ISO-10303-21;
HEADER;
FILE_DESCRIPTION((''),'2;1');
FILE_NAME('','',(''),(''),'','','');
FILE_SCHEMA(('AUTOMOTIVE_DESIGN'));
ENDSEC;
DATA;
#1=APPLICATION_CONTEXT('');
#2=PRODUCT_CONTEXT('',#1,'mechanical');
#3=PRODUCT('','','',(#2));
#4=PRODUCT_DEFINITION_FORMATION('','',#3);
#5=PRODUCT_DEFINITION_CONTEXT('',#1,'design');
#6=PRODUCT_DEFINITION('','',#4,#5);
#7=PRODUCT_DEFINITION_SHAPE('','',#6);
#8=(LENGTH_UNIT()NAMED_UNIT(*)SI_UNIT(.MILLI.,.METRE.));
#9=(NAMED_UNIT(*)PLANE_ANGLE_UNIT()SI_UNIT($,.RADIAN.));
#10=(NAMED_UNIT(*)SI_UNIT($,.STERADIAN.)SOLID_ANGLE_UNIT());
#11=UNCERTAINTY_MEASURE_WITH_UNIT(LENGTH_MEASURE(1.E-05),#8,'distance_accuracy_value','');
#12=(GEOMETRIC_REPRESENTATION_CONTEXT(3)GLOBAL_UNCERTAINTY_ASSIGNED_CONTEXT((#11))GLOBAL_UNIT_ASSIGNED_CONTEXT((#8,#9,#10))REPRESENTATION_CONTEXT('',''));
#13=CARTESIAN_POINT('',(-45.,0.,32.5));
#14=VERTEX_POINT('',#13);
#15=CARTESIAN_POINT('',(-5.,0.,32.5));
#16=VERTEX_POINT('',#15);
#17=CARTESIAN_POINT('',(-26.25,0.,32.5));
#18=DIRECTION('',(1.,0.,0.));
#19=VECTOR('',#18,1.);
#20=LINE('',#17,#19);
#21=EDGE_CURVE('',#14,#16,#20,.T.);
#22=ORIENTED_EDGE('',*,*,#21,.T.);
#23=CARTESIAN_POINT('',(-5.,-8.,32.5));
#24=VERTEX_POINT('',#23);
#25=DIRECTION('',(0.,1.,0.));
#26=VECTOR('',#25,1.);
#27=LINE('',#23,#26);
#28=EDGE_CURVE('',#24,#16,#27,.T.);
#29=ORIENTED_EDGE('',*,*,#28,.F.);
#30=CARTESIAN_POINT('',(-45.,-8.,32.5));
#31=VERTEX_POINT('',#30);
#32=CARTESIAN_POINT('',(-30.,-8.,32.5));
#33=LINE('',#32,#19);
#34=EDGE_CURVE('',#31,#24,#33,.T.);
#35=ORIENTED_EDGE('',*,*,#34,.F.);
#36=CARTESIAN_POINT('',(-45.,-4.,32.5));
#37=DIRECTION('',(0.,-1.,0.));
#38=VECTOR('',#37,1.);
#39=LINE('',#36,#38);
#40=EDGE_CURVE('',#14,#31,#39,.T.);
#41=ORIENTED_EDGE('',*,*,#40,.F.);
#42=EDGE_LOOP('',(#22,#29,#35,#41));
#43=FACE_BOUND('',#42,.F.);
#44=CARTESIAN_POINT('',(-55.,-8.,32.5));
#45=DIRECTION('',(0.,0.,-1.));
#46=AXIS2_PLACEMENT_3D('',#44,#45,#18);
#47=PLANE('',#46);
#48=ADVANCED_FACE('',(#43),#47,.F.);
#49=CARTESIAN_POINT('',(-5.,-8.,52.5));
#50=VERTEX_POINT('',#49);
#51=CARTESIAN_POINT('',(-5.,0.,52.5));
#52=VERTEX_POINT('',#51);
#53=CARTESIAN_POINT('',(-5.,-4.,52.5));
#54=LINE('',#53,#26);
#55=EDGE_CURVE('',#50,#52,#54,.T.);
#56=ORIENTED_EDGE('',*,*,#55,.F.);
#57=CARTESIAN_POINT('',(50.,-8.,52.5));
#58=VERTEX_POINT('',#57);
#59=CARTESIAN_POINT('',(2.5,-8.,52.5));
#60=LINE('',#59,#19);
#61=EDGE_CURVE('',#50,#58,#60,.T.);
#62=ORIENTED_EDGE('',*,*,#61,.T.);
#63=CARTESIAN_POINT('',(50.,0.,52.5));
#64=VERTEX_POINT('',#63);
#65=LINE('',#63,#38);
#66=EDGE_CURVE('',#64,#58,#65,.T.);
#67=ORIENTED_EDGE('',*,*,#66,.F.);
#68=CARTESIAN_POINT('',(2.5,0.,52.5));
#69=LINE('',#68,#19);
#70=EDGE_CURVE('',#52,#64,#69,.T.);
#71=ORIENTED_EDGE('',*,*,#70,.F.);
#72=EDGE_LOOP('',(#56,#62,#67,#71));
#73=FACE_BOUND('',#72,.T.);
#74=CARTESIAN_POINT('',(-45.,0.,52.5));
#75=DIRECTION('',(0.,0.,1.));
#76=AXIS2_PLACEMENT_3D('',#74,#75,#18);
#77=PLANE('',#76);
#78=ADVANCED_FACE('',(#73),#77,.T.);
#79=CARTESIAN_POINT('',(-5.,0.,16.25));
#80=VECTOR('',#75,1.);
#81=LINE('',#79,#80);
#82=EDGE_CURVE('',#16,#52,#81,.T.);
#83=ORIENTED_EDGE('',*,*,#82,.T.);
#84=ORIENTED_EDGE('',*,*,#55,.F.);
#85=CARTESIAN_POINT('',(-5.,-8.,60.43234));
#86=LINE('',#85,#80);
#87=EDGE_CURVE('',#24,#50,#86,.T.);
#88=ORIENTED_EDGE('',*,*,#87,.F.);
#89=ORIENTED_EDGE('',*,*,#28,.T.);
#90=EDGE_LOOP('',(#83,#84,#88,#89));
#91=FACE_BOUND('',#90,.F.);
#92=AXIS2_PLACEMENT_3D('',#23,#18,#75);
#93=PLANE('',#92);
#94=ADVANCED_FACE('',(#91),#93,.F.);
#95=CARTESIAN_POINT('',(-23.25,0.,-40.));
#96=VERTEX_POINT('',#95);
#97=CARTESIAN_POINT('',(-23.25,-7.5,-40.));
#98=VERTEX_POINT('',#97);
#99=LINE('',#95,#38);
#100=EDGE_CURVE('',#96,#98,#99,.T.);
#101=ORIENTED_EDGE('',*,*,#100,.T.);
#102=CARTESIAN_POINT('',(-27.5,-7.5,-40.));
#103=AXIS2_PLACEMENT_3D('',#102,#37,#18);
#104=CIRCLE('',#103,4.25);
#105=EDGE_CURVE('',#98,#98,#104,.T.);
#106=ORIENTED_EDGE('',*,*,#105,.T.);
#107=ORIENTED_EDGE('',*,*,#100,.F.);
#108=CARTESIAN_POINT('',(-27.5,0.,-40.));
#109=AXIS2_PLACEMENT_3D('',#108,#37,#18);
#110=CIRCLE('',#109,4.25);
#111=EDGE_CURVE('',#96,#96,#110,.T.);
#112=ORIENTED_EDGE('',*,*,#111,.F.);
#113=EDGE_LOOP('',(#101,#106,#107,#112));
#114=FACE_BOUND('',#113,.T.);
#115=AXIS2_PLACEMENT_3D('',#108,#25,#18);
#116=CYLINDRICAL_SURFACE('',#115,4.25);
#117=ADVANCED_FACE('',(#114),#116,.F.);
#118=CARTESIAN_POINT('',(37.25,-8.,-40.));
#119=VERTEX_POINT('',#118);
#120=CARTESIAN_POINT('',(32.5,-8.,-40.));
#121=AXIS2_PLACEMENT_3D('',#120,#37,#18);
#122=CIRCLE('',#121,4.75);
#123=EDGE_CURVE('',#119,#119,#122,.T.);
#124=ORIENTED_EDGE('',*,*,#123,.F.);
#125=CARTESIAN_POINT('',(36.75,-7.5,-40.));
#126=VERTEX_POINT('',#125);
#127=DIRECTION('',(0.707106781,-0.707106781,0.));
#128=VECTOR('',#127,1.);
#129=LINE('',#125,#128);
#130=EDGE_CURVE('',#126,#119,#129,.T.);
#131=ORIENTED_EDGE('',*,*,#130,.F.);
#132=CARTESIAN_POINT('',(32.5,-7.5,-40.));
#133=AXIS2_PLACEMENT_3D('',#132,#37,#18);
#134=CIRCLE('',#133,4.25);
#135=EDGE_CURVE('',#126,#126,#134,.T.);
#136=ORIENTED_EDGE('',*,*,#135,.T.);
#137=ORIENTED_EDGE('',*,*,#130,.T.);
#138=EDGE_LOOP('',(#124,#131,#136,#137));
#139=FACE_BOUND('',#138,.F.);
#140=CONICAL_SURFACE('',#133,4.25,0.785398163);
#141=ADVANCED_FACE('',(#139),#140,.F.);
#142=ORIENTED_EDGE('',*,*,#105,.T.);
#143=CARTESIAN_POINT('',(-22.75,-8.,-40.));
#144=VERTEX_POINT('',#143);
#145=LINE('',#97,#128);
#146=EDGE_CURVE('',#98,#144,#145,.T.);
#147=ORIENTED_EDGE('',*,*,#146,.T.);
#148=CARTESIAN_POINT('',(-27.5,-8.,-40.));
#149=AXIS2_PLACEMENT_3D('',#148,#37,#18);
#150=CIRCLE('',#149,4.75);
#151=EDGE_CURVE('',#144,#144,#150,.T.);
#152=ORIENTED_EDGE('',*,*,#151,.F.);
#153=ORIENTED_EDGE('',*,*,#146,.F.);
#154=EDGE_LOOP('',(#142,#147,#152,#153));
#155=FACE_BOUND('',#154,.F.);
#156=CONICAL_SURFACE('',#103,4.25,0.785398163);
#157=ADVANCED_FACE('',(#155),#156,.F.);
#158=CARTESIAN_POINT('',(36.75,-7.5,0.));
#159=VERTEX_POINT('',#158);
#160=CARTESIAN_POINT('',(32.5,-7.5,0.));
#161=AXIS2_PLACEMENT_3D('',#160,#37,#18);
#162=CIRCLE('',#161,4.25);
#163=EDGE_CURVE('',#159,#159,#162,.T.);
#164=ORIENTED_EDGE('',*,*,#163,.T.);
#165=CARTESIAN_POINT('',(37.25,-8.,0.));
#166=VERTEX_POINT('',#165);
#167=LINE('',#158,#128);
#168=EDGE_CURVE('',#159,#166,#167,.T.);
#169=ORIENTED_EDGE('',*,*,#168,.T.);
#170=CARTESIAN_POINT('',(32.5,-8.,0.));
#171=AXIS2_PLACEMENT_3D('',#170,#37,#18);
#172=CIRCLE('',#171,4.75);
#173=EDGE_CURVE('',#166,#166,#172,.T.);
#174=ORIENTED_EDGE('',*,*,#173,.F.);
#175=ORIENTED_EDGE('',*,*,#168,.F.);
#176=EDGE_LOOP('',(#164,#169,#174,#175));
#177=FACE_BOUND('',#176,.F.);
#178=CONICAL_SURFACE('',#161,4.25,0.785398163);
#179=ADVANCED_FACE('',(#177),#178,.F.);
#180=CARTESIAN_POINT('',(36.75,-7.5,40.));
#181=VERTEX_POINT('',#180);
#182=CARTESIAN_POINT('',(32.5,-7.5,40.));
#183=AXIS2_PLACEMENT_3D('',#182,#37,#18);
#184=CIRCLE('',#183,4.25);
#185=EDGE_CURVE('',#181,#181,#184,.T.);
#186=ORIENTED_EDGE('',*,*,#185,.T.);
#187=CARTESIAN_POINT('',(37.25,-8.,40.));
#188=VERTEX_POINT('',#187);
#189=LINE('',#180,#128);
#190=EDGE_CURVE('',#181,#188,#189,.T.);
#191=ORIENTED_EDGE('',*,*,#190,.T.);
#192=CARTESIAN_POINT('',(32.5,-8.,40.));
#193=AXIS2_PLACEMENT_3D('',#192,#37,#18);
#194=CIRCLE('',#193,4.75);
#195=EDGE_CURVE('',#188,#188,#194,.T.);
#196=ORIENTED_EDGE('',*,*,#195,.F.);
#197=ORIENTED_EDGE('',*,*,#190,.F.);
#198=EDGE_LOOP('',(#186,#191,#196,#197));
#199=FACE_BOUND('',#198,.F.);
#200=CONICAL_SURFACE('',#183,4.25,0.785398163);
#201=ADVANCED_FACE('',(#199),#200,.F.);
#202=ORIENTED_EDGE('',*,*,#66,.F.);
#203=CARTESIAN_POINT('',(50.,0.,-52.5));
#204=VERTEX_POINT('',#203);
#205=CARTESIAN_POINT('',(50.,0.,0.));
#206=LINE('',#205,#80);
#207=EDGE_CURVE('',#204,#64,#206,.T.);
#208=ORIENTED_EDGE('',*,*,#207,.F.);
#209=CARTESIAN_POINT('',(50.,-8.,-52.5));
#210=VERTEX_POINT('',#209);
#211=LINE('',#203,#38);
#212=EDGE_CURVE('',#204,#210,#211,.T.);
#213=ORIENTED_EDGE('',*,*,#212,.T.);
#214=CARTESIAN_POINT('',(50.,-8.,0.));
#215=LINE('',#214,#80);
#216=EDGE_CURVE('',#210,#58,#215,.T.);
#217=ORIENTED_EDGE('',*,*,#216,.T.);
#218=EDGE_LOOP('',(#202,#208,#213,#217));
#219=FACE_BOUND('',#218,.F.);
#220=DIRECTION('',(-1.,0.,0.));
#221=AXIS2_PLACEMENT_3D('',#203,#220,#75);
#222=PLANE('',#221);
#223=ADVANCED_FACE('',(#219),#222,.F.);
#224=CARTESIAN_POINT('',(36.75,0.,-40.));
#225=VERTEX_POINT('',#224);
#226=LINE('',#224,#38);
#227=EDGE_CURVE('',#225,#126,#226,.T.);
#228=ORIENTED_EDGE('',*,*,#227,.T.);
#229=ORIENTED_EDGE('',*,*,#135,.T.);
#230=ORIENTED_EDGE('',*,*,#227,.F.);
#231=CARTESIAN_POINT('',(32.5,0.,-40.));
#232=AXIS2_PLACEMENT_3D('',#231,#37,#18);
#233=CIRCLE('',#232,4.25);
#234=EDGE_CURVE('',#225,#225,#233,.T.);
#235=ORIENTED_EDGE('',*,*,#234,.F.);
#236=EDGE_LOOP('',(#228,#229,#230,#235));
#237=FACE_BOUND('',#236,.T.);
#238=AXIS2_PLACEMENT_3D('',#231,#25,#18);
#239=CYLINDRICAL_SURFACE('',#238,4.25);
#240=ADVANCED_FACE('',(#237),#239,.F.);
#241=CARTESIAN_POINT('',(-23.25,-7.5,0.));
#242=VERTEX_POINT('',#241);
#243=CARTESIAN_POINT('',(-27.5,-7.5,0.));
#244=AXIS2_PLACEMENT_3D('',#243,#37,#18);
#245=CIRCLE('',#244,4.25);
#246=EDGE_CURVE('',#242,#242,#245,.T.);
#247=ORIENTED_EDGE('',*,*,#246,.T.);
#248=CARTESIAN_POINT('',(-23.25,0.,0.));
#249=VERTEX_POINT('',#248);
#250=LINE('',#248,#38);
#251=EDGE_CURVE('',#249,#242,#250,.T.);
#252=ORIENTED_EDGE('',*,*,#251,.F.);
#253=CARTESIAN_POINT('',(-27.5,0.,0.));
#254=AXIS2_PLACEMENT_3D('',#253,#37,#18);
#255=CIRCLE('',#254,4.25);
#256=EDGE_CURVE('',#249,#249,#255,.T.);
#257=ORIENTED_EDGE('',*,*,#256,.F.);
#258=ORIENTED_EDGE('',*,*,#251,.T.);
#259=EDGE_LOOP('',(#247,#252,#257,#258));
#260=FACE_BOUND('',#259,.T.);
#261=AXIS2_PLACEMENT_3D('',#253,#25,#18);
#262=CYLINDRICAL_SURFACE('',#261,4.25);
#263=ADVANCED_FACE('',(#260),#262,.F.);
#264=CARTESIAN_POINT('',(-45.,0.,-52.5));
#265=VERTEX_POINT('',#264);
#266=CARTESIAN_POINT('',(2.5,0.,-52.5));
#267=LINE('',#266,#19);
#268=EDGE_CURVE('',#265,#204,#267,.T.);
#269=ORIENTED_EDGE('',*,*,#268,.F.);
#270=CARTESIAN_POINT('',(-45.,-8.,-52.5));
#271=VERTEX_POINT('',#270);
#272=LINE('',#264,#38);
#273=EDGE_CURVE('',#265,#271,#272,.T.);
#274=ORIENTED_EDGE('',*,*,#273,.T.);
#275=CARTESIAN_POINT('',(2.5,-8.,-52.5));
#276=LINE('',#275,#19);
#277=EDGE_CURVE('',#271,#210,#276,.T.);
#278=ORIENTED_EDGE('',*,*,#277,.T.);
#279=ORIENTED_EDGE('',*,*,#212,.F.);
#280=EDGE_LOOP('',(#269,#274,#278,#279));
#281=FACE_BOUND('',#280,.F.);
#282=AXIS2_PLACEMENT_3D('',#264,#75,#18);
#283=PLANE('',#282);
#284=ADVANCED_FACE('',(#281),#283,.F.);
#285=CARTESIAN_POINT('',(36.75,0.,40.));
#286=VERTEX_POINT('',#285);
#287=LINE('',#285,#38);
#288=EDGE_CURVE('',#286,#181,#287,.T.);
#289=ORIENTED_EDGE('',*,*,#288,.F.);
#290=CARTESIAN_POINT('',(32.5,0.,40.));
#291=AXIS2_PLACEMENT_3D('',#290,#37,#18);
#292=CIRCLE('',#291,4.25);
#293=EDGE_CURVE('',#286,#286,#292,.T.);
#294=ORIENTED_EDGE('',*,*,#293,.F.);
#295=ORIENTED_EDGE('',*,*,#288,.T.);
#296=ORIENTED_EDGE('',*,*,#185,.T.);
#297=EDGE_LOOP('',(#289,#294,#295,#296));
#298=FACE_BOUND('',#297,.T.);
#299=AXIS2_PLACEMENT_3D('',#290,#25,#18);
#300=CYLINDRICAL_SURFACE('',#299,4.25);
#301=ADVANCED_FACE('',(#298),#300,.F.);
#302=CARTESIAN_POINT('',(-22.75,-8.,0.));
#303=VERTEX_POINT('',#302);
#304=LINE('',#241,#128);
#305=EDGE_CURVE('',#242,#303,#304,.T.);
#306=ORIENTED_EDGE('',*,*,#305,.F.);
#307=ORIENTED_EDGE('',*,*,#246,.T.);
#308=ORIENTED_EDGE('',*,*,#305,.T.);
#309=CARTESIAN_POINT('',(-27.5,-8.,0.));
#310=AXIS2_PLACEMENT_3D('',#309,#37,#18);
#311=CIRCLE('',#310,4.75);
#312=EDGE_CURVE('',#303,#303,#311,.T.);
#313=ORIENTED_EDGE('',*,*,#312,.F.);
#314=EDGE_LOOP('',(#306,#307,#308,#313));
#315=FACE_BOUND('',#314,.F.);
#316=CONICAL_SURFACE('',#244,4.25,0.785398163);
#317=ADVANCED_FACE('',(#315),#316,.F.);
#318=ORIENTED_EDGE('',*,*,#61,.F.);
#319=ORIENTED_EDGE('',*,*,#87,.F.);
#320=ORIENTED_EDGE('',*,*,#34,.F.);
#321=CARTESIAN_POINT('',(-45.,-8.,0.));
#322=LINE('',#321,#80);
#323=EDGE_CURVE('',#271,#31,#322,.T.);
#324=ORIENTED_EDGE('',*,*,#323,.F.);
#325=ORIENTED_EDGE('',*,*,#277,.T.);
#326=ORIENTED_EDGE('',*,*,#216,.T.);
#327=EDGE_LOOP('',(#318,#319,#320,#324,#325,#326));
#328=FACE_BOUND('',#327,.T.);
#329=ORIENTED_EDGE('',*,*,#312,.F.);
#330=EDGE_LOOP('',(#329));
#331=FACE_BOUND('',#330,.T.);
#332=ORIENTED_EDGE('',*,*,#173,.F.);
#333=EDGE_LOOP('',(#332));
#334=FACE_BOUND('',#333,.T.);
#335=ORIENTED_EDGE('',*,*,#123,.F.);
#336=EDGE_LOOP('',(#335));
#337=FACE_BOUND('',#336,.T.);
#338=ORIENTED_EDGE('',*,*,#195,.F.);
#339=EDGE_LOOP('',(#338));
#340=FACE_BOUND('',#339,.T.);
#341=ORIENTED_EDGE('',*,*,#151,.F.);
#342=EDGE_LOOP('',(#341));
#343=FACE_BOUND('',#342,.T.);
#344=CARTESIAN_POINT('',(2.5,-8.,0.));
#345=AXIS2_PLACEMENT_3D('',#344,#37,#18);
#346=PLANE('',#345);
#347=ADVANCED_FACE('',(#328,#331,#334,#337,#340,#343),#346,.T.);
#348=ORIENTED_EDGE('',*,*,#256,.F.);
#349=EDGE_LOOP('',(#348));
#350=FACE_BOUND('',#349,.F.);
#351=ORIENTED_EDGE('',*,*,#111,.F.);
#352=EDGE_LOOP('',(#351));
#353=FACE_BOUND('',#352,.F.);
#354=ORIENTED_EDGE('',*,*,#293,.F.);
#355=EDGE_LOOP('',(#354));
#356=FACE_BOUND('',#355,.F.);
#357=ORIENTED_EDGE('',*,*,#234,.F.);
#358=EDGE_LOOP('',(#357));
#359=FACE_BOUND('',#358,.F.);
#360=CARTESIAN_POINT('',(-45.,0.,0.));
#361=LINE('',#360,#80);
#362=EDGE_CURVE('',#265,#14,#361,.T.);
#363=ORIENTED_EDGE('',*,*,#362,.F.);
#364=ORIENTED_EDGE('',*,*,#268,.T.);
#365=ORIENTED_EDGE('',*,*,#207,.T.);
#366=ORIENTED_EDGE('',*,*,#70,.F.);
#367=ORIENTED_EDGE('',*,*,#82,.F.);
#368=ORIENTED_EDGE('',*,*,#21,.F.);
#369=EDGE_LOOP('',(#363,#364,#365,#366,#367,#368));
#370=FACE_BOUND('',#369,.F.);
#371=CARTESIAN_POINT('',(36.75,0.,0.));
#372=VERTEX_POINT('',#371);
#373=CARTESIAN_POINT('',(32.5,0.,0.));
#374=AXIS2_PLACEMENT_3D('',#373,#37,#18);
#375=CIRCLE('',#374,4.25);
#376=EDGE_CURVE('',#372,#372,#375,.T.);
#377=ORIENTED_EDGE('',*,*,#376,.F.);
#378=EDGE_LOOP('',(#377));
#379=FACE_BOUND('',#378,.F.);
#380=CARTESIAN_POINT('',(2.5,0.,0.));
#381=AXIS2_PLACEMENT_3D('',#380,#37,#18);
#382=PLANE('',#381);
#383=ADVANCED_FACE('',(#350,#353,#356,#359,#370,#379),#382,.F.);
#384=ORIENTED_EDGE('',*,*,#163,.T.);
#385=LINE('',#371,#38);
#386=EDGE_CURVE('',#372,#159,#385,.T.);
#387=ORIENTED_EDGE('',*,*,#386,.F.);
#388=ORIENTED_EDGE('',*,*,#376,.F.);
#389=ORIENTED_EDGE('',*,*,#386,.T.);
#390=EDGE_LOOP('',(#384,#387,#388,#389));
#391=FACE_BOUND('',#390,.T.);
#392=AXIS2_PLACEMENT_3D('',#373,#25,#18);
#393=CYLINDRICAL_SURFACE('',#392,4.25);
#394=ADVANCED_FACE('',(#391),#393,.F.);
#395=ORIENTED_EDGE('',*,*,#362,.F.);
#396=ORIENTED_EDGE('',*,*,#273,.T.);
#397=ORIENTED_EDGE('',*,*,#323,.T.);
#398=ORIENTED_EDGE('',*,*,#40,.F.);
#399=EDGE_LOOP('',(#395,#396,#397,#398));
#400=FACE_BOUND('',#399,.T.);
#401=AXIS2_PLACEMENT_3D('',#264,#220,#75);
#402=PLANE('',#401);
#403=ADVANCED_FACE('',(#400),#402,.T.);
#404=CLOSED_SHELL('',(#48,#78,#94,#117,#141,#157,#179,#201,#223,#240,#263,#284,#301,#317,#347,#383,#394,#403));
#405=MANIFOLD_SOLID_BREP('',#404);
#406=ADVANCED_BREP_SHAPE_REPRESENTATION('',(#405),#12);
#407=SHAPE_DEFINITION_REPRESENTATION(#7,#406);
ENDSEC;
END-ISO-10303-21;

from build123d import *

# Parameters (mm, degrees)
F0_W     = 95
F0_H     = 105
F0_R     = 4.25
F1_DEPTH = 8
F2_SIZE  = 0.5
F3_W     = 50
F3_H     = 55.8646805584
F4_DEPTH = 25


with BuildPart() as f1:
    # F0 (on Front) → F1 (new body)
    with BuildSketch(Plane.XZ):
        with Locations((2.5, 0)):
            Rectangle(F0_W, F0_H)
        with Locations((-27.5, -40)):
            Circle(F0_R, mode=Mode.SUBTRACT)
        with Locations((32.5, -40)):
            Circle(F0_R, mode=Mode.SUBTRACT)
        with Locations((-27.5, 0)):
            Circle(F0_R, mode=Mode.SUBTRACT)
        with Locations((32.5, 0)):
            Circle(F0_R, mode=Mode.SUBTRACT)
        with Locations((32.5, 40)):
            Circle(F0_R, mode=Mode.SUBTRACT)
    extrude(amount=F1_DEPTH)

    # F2
    f2_edges = [f1.edges().sort_by_distance(p)[0] for p in [
        (28.25, -8, 40),
        (28.25, -8, -40),
        (-31.75, -8, -40),
        (-31.75, -8, 0),
        (28.25, -8, 0),
    ]]
    chamfer(f2_edges, length=F2_SIZE)

    # F3 (on face) → F4 (cut)
    with BuildSketch(Plane.XZ.offset(8)):
        with Locations((-30, 60.4323402792)):
            Rectangle(F3_W, F3_H)
    extrude(amount=-F4_DEPTH, mode=Mode.SUBTRACT)


solid = f1.part
